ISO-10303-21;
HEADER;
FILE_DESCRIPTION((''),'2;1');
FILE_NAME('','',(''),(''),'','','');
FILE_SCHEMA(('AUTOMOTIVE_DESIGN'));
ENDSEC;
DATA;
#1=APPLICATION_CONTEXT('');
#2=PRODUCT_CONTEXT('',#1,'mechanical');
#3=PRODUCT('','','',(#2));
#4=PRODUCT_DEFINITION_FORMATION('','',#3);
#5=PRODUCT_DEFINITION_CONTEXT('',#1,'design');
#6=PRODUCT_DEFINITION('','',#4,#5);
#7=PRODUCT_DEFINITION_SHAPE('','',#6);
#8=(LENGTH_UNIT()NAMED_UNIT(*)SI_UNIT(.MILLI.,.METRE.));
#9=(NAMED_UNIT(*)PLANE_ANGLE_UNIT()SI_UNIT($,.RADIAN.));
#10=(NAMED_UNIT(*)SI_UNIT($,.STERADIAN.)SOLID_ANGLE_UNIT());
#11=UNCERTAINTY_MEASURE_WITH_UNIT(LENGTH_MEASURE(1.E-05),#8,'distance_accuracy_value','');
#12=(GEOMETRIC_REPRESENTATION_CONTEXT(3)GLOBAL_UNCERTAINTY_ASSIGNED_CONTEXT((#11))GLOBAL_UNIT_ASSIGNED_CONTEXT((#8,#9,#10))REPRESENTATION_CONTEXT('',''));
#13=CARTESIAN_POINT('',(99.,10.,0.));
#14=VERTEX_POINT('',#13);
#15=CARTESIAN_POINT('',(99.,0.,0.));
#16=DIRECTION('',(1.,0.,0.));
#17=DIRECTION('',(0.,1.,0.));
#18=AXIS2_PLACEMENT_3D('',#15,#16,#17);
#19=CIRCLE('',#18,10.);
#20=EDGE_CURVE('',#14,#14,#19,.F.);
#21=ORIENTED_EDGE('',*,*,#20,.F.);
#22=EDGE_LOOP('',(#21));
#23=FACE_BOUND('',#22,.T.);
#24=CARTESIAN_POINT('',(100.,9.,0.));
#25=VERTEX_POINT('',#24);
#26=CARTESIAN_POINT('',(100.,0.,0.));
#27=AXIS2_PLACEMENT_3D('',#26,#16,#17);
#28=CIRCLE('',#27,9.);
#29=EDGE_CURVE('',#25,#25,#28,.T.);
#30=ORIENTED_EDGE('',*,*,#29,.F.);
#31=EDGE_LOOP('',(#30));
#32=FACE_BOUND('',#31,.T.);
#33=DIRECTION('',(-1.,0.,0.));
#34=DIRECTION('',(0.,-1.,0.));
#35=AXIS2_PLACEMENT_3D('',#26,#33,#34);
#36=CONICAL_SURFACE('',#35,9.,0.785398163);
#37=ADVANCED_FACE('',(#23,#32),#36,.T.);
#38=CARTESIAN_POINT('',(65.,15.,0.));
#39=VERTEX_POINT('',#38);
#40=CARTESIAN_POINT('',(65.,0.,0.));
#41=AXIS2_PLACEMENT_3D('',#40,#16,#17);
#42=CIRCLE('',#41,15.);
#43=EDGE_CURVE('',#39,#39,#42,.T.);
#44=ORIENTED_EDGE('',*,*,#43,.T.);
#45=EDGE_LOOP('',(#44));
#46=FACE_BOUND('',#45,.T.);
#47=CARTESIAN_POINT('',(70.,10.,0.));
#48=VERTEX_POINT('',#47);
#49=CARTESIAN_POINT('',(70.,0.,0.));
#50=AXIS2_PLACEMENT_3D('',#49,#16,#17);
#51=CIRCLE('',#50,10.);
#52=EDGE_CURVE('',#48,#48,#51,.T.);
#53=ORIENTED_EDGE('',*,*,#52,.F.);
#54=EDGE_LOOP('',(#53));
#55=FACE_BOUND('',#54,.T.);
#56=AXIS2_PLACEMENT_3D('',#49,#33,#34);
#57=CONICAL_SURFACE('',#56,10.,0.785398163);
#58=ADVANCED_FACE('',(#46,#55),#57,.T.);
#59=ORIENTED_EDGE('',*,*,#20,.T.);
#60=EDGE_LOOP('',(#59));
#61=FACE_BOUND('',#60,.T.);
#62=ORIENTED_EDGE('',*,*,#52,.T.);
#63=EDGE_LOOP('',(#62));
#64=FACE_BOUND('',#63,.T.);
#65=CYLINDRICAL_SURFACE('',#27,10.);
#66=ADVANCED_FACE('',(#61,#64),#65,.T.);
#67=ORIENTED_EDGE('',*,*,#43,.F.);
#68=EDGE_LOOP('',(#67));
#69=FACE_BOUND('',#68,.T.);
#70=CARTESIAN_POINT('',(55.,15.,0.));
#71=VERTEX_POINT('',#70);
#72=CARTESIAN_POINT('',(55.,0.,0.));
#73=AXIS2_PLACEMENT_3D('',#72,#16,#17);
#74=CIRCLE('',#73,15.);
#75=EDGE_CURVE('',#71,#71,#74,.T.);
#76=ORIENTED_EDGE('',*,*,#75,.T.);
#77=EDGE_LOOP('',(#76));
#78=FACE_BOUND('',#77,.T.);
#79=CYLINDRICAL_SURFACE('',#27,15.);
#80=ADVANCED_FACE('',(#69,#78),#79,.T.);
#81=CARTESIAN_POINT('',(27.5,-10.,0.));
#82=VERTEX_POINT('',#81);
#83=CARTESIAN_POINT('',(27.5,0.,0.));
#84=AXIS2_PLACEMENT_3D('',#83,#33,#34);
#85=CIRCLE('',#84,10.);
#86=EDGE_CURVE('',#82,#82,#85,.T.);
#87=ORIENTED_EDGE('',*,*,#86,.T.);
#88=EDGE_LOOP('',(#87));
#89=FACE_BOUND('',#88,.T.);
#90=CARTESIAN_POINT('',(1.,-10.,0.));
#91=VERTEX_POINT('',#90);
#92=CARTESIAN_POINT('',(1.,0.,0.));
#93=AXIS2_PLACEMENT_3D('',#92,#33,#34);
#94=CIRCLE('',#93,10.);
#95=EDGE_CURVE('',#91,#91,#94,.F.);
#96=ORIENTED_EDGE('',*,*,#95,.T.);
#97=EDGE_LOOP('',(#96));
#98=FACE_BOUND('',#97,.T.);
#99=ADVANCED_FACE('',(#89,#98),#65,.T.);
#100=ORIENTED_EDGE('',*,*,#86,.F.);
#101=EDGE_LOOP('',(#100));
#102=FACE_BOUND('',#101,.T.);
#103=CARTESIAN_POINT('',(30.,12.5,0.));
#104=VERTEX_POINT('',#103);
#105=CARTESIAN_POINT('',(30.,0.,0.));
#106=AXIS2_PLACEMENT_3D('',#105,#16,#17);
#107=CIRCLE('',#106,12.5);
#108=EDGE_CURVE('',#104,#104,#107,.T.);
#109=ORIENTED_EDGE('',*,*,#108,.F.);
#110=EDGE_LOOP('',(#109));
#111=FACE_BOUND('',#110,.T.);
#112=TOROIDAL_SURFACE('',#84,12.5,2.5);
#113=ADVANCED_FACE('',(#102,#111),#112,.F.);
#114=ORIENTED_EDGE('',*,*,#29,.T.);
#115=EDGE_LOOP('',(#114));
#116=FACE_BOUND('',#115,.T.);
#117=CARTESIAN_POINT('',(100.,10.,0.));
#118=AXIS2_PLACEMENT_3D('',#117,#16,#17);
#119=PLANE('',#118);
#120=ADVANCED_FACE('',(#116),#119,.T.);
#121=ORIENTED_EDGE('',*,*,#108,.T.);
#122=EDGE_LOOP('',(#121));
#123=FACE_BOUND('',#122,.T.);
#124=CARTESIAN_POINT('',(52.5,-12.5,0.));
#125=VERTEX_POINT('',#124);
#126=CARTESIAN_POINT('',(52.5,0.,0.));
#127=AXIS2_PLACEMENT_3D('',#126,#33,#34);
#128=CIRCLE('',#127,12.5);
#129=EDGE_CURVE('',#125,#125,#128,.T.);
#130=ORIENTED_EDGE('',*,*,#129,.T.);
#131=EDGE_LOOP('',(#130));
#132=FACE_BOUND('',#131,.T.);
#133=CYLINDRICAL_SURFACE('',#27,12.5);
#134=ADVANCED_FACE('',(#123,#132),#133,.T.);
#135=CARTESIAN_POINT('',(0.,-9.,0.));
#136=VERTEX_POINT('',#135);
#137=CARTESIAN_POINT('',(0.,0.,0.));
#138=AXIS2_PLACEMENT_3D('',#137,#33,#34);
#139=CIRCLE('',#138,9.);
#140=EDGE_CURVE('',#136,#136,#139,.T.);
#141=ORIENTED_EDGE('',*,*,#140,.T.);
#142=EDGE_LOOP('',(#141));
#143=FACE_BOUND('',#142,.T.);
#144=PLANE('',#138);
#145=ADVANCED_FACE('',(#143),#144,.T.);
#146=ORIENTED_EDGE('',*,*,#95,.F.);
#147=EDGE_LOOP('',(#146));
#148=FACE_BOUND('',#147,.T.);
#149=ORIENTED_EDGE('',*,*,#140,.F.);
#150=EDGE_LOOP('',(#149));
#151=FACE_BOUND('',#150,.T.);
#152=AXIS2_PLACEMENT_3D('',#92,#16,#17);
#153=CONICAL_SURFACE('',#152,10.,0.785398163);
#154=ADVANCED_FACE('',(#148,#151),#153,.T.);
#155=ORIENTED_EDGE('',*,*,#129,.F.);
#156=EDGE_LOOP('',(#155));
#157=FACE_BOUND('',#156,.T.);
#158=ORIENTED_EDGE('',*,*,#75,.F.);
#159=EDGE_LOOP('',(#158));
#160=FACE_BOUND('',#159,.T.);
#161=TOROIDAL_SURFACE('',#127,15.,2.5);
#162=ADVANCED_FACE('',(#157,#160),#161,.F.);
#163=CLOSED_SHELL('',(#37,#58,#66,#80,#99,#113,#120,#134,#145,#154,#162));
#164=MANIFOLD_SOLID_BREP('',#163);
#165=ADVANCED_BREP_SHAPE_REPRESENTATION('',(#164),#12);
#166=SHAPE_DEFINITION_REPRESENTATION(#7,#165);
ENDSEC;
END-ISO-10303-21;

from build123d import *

# Parameters (mm, degrees)
FILLET1_R     = 2.5
CHAMFER1_SIZE = 1


with BuildPart() as part:
    # Sketch1 → Revolve1 (revolve)
    with BuildSketch(Plane.XY):
        Polygon((0, 0), (0, 10), (30, 10), (30, 12.5), (55, 12.5), (55, 15), (65, 15), (70, 10), (100, 10), (100, 0), align=None)
    revolve(axis=Axis((100, 0, 0), (-1, 0, 0)))

    # Fillet1
    fillet1_edges = [part.edges().sort_by_distance(p)[0] for p in [
        (30, -10, 0),
        (55, -12.5, 0),
    ]]
    fillet(fillet1_edges, radius=FILLET1_R - 0.0001)  # a hair under: the kernel refuses the full size

    # Chamfer1
    chamfer1_edges = [part.edges().sort_by_distance(p)[0] for p in [
        (0, -10, 0),
        (100, -10, 0),
    ]]
    chamfer(chamfer1_edges, length=CHAMFER1_SIZE)


solid = part.part
